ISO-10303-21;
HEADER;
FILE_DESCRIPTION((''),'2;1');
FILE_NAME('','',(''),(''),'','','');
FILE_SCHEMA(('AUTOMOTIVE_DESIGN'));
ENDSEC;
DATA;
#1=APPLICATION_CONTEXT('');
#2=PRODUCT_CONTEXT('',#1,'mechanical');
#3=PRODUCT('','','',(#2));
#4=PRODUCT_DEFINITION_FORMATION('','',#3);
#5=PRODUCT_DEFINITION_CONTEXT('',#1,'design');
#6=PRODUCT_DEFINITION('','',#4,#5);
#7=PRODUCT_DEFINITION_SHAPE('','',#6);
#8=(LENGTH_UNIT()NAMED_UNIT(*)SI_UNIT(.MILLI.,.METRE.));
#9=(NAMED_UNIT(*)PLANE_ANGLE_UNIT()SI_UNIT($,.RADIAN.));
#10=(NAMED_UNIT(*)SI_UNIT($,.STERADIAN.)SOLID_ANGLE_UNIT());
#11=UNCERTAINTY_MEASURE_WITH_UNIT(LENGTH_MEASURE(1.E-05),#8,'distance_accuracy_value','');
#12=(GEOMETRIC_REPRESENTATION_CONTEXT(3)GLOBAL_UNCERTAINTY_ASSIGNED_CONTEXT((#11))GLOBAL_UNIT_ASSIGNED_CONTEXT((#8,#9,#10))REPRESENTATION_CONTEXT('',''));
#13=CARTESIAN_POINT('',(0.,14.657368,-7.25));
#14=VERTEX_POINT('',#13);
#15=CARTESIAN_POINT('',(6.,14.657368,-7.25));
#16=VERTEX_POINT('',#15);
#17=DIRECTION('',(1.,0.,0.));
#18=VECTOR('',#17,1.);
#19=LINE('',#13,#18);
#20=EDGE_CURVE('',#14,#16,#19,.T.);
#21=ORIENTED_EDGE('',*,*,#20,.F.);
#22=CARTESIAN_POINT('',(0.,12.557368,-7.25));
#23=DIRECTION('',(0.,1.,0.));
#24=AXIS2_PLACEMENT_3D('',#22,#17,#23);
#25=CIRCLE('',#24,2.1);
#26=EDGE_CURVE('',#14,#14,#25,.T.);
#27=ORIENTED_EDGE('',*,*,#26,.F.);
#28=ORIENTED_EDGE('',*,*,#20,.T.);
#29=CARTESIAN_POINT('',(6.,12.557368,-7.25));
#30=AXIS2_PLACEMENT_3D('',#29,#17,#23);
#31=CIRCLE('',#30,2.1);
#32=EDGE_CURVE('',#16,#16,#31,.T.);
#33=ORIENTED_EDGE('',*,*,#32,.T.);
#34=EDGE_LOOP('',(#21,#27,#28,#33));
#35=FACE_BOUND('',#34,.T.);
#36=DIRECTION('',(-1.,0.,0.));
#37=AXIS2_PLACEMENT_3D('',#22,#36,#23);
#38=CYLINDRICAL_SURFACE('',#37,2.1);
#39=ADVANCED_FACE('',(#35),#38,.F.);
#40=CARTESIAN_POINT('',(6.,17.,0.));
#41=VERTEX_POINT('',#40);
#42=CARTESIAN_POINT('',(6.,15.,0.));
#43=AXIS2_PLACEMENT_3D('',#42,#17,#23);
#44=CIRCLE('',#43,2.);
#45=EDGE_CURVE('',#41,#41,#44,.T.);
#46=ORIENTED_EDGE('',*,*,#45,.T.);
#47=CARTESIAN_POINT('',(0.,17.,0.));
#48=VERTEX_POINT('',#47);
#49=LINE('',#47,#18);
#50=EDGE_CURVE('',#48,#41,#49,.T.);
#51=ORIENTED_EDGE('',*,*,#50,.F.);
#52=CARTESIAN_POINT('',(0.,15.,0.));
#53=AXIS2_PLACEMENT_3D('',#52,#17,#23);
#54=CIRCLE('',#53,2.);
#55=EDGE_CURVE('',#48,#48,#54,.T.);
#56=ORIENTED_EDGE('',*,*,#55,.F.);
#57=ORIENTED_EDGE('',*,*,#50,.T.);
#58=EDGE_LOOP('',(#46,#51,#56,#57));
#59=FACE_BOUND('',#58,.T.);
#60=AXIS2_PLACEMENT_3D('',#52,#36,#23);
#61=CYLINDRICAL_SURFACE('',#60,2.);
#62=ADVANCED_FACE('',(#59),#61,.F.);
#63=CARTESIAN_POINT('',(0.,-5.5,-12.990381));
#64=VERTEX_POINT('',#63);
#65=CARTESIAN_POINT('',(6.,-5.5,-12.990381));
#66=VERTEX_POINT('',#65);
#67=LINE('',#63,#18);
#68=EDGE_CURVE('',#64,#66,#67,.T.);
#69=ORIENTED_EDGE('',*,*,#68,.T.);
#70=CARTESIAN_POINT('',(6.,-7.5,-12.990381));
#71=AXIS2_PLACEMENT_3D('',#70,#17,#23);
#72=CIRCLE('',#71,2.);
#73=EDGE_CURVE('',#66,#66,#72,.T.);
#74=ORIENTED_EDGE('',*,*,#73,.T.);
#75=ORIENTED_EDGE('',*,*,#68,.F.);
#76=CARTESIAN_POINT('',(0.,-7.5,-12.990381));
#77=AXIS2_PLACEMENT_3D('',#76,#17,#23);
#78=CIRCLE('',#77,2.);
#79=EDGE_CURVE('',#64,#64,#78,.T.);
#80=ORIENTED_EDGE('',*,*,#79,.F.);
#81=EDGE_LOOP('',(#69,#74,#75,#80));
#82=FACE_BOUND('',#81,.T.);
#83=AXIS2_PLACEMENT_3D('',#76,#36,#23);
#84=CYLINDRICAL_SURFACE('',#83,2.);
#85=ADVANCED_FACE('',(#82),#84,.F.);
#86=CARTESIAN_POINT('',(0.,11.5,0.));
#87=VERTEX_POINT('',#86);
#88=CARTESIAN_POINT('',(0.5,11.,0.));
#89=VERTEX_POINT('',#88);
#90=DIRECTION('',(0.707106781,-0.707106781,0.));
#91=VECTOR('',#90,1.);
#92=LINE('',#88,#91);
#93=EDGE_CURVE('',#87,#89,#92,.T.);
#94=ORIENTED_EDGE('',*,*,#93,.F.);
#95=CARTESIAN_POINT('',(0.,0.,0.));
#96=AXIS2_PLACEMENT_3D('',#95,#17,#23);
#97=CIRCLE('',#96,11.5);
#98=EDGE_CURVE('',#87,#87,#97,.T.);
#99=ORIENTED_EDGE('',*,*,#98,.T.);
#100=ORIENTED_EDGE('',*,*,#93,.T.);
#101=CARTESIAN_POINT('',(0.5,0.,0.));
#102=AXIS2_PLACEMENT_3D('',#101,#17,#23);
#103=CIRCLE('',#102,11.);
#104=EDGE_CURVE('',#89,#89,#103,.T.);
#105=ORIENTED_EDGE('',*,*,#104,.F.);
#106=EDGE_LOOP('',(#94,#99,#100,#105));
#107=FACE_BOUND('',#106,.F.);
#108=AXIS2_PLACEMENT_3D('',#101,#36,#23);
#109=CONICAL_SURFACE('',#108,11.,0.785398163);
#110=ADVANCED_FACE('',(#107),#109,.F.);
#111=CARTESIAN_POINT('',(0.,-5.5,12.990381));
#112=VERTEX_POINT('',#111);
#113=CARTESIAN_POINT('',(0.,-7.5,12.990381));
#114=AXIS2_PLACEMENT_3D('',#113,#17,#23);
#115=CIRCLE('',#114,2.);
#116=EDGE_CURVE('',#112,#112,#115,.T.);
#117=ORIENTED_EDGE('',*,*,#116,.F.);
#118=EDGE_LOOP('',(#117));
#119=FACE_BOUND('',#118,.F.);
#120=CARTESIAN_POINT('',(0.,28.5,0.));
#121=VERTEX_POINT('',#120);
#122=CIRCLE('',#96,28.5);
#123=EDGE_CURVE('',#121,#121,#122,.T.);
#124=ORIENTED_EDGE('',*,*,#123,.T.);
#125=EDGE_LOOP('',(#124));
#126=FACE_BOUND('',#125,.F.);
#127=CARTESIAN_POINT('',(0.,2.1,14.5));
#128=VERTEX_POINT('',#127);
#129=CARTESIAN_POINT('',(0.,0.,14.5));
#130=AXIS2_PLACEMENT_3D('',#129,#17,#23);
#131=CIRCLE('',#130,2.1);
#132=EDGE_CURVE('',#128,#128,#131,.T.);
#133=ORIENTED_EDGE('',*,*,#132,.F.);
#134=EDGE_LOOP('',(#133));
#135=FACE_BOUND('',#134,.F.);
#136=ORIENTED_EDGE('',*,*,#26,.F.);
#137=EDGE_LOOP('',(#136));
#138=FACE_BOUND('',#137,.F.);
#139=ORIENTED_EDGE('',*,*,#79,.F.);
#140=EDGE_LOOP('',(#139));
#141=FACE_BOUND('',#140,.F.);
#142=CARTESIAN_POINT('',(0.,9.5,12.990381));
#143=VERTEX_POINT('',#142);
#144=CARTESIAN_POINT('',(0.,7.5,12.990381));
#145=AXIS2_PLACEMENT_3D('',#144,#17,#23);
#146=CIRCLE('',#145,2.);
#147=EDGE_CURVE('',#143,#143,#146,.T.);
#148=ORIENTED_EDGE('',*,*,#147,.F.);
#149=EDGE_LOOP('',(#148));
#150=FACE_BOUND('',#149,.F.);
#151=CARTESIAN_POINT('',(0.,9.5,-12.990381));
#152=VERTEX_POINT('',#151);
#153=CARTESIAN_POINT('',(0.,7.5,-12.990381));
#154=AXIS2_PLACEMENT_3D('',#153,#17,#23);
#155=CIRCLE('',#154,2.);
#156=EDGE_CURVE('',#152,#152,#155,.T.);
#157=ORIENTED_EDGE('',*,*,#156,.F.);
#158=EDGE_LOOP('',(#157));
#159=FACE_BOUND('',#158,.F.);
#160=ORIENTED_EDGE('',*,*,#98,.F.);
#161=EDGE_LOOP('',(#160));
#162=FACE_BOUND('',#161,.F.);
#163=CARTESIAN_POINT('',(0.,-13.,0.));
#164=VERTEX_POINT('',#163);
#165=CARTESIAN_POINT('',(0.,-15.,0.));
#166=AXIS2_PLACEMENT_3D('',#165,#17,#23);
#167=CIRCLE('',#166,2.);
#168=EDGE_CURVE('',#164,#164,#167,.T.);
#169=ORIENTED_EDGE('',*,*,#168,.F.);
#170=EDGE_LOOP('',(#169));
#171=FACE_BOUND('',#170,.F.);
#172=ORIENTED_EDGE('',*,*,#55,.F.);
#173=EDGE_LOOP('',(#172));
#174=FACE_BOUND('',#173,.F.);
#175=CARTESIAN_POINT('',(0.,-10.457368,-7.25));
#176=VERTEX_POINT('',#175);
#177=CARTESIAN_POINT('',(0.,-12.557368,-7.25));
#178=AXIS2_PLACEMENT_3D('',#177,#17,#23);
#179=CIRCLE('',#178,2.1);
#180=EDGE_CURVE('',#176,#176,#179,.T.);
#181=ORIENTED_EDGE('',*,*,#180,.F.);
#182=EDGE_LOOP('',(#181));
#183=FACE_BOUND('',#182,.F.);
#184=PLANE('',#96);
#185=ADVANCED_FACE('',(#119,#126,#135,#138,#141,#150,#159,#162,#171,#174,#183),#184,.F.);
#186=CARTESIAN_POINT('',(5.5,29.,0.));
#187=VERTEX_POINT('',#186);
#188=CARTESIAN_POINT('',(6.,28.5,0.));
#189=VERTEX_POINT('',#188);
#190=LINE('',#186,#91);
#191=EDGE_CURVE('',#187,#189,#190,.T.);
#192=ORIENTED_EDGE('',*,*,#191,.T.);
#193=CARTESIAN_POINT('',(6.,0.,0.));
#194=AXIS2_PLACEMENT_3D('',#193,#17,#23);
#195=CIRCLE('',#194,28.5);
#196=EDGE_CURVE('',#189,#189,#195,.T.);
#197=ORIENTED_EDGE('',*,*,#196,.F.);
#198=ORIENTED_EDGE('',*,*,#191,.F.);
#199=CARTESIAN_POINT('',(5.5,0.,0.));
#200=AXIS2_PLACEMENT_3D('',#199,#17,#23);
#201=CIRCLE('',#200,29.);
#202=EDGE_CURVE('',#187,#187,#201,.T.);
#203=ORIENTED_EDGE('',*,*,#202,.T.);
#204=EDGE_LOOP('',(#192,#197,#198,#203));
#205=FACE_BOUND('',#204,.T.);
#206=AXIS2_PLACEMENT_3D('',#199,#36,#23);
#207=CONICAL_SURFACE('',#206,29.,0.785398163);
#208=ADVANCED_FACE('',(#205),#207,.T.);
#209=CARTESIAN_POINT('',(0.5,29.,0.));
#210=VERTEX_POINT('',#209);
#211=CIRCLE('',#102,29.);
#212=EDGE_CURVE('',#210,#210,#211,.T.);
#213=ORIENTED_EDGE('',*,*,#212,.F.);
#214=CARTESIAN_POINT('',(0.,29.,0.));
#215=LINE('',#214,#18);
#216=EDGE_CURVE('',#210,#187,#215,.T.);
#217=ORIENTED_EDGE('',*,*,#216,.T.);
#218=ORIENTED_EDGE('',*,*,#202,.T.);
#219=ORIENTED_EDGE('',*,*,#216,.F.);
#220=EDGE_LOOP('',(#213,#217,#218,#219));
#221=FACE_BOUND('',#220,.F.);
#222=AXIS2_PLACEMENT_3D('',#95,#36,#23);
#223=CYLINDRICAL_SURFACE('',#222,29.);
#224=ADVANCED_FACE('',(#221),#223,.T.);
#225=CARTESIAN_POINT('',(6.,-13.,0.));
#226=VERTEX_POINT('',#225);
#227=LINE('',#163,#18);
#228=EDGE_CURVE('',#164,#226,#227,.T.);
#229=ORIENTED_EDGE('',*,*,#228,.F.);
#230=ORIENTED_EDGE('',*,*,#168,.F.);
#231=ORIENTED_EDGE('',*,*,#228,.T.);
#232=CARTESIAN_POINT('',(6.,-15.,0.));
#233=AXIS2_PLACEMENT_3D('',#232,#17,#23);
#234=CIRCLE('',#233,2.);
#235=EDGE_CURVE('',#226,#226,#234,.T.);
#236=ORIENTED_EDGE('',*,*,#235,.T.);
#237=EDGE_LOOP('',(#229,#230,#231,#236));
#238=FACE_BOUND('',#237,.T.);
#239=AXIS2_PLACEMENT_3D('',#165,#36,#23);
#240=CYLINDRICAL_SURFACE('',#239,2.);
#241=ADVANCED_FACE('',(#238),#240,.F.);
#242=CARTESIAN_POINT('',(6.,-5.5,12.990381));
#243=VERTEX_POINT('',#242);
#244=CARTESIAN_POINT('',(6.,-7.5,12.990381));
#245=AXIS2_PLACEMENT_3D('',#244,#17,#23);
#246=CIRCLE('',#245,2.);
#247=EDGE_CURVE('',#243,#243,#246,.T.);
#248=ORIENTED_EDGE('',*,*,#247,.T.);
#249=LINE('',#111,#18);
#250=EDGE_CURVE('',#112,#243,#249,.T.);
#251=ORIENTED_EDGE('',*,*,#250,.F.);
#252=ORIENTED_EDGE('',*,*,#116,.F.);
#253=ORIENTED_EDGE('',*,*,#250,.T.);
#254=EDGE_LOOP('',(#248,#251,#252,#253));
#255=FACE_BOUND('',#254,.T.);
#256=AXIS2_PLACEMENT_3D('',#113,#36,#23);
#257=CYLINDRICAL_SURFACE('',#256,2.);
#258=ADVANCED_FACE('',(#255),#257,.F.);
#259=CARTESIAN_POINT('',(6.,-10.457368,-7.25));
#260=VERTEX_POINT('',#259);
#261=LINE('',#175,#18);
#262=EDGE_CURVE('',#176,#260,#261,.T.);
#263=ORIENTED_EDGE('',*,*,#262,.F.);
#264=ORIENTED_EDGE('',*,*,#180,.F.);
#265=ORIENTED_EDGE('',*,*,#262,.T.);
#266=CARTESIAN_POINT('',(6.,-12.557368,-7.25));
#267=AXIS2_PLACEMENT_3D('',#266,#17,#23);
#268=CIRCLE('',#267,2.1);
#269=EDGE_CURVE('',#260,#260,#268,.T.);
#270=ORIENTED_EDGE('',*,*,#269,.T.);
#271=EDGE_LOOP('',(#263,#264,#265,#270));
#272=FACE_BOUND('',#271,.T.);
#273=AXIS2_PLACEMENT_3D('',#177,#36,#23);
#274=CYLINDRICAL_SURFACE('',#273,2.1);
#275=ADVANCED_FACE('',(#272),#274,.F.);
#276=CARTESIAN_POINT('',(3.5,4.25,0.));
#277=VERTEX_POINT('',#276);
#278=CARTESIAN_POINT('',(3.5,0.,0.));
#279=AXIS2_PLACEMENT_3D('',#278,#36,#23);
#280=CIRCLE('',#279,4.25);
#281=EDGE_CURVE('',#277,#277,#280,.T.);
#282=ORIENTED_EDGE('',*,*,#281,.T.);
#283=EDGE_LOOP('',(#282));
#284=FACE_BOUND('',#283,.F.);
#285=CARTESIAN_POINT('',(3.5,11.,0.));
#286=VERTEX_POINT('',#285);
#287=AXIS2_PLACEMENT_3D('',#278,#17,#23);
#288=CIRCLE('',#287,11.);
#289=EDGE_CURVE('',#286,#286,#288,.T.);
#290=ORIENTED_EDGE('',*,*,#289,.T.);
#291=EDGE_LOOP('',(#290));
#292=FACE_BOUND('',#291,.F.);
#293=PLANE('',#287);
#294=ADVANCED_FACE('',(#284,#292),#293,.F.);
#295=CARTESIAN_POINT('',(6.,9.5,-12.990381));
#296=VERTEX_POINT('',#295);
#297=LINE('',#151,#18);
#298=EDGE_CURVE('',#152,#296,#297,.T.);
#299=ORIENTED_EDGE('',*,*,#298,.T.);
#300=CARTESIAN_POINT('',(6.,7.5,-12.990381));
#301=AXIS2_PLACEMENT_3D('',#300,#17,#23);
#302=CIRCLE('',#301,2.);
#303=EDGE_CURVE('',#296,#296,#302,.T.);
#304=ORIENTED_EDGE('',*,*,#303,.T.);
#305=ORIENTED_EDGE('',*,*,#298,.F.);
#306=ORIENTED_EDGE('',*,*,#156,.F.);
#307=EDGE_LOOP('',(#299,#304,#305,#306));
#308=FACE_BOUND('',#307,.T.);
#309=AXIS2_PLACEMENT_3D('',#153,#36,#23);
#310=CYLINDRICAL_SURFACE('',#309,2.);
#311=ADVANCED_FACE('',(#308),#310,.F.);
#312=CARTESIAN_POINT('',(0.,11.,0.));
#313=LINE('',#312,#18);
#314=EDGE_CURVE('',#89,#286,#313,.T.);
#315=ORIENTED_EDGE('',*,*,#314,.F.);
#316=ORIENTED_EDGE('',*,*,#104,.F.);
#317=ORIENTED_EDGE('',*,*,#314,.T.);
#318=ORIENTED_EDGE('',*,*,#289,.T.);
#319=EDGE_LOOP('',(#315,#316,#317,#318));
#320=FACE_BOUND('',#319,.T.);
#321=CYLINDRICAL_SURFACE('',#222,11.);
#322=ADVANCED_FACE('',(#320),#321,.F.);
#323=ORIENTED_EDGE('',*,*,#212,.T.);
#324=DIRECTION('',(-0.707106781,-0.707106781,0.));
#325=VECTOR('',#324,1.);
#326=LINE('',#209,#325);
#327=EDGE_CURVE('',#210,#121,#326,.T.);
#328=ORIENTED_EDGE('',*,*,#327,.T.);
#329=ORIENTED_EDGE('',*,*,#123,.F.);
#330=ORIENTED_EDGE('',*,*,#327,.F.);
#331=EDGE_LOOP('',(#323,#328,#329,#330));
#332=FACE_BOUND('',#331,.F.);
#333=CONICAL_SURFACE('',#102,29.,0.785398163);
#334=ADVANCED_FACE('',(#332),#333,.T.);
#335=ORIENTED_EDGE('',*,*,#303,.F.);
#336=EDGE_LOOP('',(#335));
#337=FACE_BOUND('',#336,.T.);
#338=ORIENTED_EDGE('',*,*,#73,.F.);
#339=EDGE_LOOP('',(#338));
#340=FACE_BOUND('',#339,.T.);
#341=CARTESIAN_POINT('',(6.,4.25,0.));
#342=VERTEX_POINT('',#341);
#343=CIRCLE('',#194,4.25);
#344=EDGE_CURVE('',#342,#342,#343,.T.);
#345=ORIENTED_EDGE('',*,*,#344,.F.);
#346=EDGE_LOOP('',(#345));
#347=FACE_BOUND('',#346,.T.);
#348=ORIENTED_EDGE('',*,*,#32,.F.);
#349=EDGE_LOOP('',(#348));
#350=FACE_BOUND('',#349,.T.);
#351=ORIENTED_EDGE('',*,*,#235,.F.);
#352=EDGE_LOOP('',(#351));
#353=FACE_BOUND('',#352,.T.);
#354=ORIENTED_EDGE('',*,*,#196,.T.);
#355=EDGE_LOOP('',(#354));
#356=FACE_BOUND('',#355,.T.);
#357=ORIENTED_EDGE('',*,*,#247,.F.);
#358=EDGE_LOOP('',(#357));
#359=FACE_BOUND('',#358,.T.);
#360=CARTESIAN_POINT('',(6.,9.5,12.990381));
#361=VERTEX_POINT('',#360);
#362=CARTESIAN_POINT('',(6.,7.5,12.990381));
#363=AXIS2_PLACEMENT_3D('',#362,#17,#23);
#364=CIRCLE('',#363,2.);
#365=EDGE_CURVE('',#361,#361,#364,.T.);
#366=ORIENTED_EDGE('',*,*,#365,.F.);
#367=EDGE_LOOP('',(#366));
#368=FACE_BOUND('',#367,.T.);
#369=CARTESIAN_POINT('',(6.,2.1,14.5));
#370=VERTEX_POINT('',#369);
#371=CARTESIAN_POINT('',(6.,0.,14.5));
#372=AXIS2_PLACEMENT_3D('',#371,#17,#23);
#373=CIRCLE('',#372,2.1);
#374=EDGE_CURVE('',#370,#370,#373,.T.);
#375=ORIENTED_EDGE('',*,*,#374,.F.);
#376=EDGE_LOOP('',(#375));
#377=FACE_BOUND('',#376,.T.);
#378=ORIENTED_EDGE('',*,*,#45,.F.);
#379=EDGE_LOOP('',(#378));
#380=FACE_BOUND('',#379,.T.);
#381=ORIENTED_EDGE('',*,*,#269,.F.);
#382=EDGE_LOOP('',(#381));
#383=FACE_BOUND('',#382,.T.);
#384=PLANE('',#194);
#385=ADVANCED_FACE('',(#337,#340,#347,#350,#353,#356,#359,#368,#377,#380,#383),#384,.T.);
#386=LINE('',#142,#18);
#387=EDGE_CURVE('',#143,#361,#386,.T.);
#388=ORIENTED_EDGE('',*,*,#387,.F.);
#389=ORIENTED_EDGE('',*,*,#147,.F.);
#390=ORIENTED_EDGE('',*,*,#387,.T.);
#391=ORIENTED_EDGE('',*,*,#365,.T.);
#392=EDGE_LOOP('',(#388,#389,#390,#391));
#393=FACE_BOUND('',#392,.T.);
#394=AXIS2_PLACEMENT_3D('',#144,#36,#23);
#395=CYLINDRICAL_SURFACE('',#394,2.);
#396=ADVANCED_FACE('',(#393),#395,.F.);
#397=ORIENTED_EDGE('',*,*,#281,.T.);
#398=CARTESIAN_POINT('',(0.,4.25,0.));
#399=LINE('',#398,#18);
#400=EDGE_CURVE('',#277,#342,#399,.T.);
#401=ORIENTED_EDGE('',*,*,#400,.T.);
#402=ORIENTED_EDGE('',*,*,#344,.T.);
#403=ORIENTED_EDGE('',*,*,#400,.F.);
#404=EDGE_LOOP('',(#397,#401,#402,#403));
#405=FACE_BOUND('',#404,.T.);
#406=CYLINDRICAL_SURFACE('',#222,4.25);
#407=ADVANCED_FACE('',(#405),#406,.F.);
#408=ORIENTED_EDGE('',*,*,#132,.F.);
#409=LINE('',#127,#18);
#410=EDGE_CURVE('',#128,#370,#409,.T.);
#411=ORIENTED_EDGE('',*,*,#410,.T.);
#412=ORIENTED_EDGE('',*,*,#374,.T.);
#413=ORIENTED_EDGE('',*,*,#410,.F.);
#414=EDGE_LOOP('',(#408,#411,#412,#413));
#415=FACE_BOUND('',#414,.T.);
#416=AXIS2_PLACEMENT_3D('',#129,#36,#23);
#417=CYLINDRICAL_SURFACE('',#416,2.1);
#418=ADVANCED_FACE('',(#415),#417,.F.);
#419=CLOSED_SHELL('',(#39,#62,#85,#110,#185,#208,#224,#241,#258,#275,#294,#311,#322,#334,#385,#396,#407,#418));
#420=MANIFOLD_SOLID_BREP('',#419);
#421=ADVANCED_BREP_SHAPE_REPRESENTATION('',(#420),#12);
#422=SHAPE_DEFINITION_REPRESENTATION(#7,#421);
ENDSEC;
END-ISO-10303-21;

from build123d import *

# Parameters (mm, degrees)
F0_R     = 29
F0_R_2   = 2
F0_R_3   = 2.1
F0_R_4   = 4.25
F1_DEPTH = 6
F2_R     = 11
F3_DEPTH = 3.5
F4_SIZE  = 0.5


# Not quite as in the source:
# - a feature names something its author has since deleted; it is built from what else it names


with BuildPart() as f1:
    # F0 (on Right) → F1 (new body)
    with BuildSketch(Plane.YZ):
        Circle(F0_R)
        with Locations((-7.5, -12.9903810568)):
            Circle(F0_R_2, mode=Mode.SUBTRACT)
        with Locations((-12.5573683549, -7.25)):
            Circle(F0_R_3, mode=Mode.SUBTRACT)
        with Locations((7.5, -12.9903810568)):
            Circle(F0_R_2, mode=Mode.SUBTRACT)
        with Locations((12.5573683549, -7.25)):
            Circle(F0_R_3, mode=Mode.SUBTRACT)
        with Locations((-15, 0)):
            Circle(F0_R_2, mode=Mode.SUBTRACT)
        with Locations((-7.5, 12.9903810568)):
            Circle(F0_R_2, mode=Mode.SUBTRACT)
        Circle(F0_R_4, mode=Mode.SUBTRACT)
        with Locations((7.5, 12.9903810568)):
            Circle(F0_R_2, mode=Mode.SUBTRACT)
        with Locations((15, 0)):
            Circle(F0_R_2, mode=Mode.SUBTRACT)
        with Locations((0, 14.5)):
            Circle(F0_R_3, mode=Mode.SUBTRACT)
    extrude(amount=F1_DEPTH)

    # F2 (on Right) → F3 (cut)
    with BuildSketch(Plane.YZ):
        Circle(F2_R)
    extrude(amount=F3_DEPTH, mode=Mode.SUBTRACT)

    # F4
    f4_edges = [f1.edges().sort_by_distance(p)[0] for p in [
        (0, -11, 0),
        (0, -29, 0),
        (6, -29, 0),
    ]]
    chamfer(f4_edges, length=F4_SIZE)


solid = f1.part
